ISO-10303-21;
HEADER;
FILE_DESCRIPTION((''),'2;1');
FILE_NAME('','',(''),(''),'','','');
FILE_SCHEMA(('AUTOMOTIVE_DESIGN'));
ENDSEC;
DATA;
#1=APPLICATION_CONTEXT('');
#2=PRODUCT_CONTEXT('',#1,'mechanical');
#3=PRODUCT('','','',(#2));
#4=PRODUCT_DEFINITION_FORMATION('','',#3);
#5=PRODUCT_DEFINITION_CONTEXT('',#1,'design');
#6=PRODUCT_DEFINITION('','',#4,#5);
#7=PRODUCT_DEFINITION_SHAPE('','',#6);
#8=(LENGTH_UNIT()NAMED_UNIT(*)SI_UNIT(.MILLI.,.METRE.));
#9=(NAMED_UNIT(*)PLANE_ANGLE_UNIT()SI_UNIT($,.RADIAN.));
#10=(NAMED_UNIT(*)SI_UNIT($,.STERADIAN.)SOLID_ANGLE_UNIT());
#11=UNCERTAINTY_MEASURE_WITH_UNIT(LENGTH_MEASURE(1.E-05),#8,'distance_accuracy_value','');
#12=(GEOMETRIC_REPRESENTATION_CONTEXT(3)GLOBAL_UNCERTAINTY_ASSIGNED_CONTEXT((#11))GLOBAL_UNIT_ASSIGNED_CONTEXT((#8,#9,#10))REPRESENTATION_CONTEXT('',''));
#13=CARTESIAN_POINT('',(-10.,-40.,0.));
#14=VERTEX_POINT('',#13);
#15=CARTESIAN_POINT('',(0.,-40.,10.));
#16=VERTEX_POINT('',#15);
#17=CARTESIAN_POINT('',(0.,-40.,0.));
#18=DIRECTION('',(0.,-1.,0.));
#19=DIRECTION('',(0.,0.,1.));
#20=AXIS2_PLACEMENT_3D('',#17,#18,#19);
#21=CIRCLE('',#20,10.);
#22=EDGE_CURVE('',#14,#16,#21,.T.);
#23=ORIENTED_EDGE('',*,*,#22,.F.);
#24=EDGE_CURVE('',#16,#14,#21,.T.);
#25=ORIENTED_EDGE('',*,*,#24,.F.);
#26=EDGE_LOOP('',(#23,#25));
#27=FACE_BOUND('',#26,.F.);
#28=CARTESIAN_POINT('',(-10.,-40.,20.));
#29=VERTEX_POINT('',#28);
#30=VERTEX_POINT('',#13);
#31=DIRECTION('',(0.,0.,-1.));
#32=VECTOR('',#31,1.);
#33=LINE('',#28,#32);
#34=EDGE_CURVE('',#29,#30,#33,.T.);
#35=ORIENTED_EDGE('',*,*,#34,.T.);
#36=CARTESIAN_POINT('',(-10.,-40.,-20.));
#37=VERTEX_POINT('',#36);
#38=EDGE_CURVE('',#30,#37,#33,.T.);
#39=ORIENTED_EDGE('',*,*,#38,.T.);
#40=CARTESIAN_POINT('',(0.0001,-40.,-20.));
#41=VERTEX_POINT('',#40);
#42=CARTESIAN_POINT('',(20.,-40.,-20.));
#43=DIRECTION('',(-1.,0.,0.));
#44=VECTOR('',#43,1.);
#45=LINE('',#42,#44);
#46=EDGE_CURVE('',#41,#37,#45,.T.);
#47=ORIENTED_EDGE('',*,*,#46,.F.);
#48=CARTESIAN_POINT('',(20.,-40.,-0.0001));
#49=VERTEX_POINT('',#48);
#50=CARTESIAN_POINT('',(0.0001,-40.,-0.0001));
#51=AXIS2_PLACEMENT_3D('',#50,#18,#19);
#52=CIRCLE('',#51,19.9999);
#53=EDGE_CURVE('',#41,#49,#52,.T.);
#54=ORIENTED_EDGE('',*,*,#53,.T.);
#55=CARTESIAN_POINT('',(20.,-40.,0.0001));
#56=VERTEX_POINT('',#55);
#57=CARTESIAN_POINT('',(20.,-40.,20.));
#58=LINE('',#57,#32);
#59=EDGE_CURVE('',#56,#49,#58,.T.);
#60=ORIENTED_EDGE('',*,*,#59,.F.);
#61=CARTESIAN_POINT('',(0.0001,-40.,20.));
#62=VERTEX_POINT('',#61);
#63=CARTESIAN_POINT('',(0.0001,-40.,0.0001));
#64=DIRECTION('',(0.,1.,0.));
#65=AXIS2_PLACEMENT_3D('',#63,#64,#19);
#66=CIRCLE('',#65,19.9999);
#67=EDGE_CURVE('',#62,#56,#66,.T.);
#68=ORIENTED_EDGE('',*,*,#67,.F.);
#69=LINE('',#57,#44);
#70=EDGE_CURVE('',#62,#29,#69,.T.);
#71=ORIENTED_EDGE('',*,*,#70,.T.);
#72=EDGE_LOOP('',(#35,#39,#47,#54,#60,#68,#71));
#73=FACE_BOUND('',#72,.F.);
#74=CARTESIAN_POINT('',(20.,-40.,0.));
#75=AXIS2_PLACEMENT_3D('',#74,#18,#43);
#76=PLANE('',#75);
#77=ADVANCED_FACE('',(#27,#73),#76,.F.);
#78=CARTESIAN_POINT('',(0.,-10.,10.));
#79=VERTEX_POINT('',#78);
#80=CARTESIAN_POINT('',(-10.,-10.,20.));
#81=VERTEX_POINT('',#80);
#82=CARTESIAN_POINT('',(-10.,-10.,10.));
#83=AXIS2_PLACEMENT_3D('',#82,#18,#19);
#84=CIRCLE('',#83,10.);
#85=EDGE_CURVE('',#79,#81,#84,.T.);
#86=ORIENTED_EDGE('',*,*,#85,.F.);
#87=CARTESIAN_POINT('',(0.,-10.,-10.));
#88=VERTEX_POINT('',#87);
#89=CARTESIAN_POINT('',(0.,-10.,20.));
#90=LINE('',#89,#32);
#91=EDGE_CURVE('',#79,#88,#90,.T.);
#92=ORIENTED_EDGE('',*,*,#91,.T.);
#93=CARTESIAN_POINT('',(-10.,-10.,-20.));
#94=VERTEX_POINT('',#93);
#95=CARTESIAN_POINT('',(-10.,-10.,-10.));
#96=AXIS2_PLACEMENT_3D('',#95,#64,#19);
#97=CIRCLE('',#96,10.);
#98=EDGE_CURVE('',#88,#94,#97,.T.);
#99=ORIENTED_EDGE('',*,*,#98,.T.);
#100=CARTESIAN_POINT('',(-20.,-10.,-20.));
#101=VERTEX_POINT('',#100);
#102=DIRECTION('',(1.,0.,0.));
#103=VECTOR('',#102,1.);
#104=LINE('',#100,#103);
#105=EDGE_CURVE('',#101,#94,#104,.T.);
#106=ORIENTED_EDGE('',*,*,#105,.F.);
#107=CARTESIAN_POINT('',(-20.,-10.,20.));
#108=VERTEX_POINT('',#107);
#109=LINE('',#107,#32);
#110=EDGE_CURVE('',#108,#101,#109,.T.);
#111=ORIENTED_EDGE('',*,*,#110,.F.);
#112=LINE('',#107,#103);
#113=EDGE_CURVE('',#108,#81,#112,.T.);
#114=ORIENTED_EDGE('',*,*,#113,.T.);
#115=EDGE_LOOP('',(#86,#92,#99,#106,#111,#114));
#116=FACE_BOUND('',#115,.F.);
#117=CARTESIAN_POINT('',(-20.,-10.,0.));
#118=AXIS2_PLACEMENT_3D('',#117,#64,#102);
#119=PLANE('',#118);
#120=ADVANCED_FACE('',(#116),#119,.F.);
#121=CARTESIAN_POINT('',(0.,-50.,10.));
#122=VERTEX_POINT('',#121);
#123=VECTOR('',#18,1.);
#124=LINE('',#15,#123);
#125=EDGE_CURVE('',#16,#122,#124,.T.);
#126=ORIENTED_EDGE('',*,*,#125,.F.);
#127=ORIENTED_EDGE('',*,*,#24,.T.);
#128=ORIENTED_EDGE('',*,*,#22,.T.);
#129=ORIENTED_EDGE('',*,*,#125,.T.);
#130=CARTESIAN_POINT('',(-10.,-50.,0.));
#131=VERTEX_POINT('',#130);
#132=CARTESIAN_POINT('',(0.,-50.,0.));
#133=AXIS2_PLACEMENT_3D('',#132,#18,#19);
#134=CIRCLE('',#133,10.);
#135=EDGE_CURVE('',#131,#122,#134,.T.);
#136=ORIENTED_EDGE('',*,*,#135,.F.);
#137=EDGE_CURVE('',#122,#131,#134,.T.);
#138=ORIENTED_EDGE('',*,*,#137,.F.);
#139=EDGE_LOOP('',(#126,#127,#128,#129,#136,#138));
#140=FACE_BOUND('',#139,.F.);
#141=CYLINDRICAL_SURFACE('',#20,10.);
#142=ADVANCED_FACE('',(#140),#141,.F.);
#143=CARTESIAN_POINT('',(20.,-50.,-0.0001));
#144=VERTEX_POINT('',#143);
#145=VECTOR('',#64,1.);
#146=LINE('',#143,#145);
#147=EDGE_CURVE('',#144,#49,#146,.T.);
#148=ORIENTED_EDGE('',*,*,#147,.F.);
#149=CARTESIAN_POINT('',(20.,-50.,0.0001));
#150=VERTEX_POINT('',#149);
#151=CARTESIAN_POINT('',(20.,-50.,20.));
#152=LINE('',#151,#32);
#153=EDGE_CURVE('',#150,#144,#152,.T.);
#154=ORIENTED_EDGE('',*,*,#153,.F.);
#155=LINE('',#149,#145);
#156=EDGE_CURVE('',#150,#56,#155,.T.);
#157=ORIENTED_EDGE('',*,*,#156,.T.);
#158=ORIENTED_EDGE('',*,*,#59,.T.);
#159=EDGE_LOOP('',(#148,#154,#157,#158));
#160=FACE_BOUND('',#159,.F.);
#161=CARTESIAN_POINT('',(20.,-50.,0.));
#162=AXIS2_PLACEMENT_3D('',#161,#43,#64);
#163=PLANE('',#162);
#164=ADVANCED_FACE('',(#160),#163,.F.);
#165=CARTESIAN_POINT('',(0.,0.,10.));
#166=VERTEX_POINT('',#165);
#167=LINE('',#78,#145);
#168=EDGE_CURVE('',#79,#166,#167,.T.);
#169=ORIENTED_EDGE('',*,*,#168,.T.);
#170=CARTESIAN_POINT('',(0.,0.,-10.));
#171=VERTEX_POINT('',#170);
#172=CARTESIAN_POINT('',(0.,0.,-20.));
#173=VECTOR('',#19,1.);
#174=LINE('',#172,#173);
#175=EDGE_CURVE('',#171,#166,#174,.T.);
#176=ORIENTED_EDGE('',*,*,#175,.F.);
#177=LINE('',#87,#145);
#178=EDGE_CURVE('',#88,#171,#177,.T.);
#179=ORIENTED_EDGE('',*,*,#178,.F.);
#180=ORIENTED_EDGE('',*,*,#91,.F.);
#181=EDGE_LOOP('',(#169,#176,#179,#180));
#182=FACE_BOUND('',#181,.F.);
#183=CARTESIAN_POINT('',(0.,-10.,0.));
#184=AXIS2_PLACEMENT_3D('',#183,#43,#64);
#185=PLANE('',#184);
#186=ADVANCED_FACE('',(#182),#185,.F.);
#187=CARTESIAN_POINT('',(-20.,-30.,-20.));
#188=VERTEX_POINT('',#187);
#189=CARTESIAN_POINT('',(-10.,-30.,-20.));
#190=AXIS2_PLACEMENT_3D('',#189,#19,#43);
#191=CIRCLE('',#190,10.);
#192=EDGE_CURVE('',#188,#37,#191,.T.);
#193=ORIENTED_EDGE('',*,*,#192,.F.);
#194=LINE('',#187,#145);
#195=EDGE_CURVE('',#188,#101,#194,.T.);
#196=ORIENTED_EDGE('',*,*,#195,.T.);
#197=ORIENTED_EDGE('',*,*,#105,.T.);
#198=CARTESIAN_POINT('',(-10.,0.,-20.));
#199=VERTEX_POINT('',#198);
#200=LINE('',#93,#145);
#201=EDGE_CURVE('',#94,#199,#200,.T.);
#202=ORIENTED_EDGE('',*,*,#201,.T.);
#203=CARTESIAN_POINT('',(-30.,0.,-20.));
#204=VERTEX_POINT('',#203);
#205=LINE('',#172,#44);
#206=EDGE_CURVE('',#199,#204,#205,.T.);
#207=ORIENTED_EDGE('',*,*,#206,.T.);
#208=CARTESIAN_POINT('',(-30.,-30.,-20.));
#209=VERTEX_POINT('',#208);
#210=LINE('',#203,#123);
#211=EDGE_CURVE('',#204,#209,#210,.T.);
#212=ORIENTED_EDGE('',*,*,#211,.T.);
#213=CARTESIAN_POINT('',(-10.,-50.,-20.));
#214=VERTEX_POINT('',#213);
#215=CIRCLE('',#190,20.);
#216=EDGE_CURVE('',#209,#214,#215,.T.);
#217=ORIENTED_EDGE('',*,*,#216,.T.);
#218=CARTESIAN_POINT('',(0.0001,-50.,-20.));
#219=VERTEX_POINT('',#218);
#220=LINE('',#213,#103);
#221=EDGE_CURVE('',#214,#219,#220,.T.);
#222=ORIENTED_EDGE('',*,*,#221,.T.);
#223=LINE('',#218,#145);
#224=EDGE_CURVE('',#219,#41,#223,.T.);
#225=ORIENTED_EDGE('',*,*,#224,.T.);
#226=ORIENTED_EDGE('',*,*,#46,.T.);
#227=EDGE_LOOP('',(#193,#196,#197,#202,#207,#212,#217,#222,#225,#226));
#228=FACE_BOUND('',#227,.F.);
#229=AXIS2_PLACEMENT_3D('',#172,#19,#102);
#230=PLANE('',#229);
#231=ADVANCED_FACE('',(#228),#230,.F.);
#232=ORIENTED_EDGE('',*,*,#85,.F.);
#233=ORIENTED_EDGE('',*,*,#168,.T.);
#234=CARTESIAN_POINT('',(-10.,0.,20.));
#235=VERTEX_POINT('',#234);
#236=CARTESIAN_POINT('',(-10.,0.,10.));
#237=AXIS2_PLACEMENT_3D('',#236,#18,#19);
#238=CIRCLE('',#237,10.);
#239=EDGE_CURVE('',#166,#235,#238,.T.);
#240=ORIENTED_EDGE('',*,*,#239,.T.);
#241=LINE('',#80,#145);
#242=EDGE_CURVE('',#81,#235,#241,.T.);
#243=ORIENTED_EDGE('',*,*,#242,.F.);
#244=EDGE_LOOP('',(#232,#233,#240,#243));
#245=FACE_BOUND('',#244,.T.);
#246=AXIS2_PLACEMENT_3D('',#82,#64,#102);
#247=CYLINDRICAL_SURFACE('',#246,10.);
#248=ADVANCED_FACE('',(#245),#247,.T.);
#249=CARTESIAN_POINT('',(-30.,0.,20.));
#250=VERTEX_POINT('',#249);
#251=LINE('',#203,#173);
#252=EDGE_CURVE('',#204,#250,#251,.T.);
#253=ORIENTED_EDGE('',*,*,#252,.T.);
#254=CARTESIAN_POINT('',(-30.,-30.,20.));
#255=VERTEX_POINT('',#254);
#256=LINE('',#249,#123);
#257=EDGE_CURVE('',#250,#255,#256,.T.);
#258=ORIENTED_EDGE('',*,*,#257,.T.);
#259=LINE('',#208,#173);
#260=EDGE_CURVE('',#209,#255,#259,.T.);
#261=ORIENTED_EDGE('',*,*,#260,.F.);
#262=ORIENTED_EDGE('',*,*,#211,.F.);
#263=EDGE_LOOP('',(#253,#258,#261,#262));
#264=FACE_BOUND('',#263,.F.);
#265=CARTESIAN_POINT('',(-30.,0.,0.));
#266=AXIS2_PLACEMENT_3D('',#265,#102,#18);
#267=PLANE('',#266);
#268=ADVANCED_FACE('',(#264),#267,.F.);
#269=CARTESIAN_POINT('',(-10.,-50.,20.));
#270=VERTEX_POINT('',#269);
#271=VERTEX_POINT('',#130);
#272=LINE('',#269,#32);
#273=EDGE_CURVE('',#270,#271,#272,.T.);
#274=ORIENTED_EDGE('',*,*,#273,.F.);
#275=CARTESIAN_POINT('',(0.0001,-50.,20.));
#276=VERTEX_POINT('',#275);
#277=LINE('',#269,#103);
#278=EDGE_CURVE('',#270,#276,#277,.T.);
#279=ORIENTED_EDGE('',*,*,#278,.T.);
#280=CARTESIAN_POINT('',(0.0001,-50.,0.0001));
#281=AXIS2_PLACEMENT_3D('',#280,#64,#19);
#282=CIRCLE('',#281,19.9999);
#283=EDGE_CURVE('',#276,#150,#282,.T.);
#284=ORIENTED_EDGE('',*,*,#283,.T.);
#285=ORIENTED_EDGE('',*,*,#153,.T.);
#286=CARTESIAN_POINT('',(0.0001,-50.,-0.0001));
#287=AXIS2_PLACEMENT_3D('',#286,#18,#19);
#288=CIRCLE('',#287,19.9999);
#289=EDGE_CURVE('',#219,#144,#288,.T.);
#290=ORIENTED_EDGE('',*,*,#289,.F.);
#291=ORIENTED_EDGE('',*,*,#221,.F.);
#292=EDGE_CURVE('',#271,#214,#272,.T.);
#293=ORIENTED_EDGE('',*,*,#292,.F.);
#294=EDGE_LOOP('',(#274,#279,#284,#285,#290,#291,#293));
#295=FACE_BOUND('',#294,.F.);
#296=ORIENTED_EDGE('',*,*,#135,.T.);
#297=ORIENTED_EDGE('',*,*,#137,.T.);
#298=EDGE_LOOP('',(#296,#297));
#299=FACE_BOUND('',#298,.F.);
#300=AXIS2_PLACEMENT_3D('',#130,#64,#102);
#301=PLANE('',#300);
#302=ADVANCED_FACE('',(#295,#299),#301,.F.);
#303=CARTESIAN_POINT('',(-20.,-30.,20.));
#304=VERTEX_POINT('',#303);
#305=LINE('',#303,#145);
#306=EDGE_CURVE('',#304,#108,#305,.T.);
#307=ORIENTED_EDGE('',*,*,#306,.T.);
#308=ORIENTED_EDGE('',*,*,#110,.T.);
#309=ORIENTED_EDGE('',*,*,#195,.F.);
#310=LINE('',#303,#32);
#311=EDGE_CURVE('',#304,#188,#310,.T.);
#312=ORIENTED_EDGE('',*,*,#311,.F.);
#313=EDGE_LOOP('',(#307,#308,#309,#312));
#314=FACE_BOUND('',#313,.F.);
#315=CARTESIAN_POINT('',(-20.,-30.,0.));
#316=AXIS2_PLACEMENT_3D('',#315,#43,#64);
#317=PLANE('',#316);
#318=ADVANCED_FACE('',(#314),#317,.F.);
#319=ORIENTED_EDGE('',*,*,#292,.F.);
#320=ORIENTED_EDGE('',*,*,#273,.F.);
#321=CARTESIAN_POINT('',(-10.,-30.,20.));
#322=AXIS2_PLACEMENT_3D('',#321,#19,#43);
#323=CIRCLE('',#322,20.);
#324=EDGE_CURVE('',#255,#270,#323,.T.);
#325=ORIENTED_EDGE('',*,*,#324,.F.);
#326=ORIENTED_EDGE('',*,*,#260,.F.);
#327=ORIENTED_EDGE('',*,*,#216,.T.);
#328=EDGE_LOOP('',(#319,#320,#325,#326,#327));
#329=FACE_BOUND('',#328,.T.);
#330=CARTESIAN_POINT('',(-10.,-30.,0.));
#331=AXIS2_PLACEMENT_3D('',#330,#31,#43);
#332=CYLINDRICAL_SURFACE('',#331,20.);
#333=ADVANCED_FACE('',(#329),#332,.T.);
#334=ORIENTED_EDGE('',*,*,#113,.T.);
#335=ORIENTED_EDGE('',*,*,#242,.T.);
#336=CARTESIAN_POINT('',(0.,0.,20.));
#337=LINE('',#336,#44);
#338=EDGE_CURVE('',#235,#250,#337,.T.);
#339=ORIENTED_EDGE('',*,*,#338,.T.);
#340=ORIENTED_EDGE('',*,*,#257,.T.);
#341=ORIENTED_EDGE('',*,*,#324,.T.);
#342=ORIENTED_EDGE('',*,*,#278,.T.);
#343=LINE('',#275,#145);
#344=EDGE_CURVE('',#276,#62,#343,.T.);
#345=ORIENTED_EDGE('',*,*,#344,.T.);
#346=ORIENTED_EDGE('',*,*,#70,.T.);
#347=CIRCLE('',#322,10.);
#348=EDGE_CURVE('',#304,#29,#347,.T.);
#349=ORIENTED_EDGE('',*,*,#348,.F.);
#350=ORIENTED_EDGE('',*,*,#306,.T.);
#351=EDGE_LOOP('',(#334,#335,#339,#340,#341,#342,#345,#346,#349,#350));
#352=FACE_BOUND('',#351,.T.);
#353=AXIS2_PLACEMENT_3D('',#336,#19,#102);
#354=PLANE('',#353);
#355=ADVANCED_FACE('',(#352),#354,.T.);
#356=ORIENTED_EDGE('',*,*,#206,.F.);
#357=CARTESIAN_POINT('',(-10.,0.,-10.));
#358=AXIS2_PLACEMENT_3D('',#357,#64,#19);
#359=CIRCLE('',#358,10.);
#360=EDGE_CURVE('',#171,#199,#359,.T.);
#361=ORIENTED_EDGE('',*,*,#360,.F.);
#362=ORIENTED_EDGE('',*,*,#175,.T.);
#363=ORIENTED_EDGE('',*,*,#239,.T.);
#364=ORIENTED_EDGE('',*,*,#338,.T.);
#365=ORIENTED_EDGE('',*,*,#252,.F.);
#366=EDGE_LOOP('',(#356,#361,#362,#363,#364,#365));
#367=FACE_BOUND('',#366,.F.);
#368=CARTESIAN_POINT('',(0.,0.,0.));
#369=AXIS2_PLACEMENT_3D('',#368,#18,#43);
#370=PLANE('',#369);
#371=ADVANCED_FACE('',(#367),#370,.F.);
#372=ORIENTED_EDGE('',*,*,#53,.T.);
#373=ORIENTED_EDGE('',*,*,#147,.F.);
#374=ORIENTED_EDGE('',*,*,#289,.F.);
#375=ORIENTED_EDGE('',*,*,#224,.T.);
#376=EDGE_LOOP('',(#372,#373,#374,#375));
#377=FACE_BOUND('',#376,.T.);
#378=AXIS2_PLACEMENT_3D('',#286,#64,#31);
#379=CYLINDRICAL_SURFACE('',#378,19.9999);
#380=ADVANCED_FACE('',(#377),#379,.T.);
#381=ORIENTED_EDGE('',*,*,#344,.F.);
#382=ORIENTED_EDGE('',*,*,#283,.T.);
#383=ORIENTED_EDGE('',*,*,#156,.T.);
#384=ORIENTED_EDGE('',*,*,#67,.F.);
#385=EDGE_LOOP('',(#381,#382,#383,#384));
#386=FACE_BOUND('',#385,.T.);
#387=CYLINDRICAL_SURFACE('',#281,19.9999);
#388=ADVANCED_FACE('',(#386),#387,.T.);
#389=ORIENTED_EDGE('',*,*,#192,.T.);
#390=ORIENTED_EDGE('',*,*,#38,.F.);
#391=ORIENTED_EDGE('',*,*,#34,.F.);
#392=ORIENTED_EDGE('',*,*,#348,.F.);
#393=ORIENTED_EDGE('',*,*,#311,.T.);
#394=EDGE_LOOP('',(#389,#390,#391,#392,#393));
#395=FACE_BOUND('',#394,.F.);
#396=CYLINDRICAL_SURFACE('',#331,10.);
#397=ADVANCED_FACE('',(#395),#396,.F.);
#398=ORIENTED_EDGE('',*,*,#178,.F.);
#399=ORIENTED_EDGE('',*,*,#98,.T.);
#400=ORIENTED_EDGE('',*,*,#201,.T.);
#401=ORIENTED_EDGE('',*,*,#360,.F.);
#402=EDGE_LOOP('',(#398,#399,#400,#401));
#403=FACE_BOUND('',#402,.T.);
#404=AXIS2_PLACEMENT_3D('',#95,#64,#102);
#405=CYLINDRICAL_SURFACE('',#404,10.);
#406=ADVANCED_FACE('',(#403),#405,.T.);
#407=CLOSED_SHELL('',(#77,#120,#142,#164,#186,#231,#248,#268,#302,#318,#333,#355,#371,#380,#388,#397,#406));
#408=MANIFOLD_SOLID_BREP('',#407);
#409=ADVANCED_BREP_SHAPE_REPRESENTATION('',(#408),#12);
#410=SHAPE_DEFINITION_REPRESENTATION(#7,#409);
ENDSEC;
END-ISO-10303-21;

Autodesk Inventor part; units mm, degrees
ref_plane "YZ Plane" through (0, 0, 0) normal (1, 0, 0) x (0, 1, 0)
ref_plane "XZ Plane" through (0, 0, 0) normal (0, 1, 0) x (-1, 0, 0)
ref_plane "XY Plane" through (0, 0, 0) normal (0, 0, 1) x (1, 0, 0)
sketch "草圖1" plane through (0, 0, 0) normal (0, 0, 1) x (1, 0, 0)
  line L0 (0, 0) -> (-30, 0)
  line L1 (-30, 0) -> (-30, -30)
  arc A0 (-30, -30) -> (-10, -50) centre (-10, -30) ccw
  line L2 (-10, -50) -> (20, -50)
  line L3 (20, -50) -> (20, -40)
  line L4 (20, -40) -> (-10, -40)
  arc A1 (-20, -30) -> (-10, -40) centre (-10, -30) ccw
  line L5 (-20, -30) -> (-20, -10)
  line L6 (-20, -10) -> (0, -10)
  line L7 (0, -10) -> (0, 0)
  dimension "d0" = 10
  dimension "d1" = 50
  dimension "d2" = 10
  dimension "d3" = 20
  dimension "d4" = 30
  dimension "d5" = 10
extrude "擠出1" add sketch "草圖1" along normal mid plane 40
fillet "圓角1" radius 10 2 edges at (0, -5, 20) (0, -5, -20)
fillet "圓角2" radius 20 2 edges at (20, -45, 20) (20, -45, -20)
sketch "草圖2" plane through (-10, -40, 20) normal (0, 1, 0) x (1, 0, 0)
  arc A0 (10, 0) -> (10, 40) centre (10, 20) ccw projected
  point P0 (10, 20)
hole "孔1" at (0, -40, 0) direction (0, -1, 0) diameter 20 end through all
properties part number "18" material "鋼、碳鋼"
